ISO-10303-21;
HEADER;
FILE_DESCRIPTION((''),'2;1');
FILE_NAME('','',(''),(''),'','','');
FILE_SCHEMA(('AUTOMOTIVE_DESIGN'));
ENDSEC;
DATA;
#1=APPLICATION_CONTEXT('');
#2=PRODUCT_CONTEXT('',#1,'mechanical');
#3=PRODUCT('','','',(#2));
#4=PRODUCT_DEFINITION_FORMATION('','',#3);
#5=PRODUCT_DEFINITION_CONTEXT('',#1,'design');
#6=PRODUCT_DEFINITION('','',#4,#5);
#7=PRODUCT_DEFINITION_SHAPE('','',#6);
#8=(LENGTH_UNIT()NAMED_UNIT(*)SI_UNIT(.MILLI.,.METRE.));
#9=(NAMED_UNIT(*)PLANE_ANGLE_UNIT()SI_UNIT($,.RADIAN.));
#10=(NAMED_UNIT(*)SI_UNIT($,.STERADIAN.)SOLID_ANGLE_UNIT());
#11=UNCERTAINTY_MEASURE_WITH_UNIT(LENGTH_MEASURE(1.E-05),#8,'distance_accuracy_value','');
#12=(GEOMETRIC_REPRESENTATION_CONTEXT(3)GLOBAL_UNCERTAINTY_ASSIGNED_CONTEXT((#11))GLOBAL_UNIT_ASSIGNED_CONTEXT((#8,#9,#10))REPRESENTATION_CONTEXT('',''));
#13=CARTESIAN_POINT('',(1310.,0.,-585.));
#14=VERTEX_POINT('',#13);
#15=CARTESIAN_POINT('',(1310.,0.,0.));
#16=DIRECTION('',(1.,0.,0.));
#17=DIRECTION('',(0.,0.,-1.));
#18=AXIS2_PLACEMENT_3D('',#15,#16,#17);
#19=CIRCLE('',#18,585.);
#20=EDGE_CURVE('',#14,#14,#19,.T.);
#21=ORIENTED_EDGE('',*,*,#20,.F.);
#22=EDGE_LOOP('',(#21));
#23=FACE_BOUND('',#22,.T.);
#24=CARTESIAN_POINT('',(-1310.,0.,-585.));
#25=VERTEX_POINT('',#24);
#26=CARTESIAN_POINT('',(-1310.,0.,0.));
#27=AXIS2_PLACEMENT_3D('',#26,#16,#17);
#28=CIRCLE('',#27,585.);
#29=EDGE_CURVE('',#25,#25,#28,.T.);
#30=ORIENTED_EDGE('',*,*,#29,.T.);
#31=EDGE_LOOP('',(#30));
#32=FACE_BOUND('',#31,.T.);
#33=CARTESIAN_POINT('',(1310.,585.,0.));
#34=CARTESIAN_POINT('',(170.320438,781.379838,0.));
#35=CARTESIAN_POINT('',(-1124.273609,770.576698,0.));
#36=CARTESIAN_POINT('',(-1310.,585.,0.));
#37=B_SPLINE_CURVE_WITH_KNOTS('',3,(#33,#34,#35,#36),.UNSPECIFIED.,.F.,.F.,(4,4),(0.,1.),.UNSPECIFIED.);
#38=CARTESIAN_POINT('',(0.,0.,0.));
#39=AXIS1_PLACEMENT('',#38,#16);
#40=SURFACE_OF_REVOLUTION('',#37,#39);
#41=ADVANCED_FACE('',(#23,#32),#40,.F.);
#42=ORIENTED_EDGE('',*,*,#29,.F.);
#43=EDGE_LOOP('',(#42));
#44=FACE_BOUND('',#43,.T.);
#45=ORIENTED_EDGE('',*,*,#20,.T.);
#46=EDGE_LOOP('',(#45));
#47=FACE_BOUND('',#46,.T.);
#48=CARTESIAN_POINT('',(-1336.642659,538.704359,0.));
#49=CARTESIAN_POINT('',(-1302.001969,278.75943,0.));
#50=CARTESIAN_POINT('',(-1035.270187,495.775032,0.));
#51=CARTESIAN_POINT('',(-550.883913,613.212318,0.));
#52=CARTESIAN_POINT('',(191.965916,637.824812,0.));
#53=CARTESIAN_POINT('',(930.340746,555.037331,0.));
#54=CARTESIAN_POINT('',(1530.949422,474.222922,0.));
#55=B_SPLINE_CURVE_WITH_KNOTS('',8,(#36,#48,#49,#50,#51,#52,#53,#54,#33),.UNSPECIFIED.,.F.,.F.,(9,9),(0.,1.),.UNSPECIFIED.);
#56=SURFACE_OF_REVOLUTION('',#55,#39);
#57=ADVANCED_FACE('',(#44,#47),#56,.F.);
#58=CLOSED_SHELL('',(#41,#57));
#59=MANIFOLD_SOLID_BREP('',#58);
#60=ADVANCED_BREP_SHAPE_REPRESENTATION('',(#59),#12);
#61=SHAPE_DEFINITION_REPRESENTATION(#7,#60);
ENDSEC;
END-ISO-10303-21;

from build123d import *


# Read off the part's stored shape, not the designer's step: Revolve1
with BuildPart() as part:
    # Revolve1 outline → Revolve1 (revolve)
    with BuildSketch(Plane.YX):
        with BuildLine():
            add(Edge.make_bspline(
                [(585, 1310), (580.266384144, 1319.441390823), (575.882602614, 1327.382666856), (571.833860585, 1333.877180415), (484.585039326, 1453.211327038), (565.062927766, 835.682252877), (634.160658136, 98.150388454), (597.657190294, -611.785452452), (470.513965587, -1068.205313164), (300.584735725, -1304.850532477), (540.682617834, -1335.504191569), (585, -1310)],
                knots=[0.957268995, 0.957268995, 0.957268995, 0.957268995, 0.957268995, 0.957268995, 0.957268995, 0.957268995, 0.957268995, 1, 1, 1, 1.957268995, 1.957268995, 1.957268995, 1.957268995, 1.957268995, 1.957268995, 1.957268995, 1.957268995, 1.957268995], degree=8))
            add(Edge.make_bspline(
                [(585, -1310), (770.576698458, -1124.273608822), (781.379838253, 170.320438249), (585, 1310)],
                knots=[0.492933322, 0.492933322, 0.492933322, 0.492933322, 1.492933322, 1.492933322, 1.492933322, 1.492933322], degree=3))
        make_face()
    revolve(axis=Axis((0, 0, 0), (1, 0, 0)))


solid = part.part
